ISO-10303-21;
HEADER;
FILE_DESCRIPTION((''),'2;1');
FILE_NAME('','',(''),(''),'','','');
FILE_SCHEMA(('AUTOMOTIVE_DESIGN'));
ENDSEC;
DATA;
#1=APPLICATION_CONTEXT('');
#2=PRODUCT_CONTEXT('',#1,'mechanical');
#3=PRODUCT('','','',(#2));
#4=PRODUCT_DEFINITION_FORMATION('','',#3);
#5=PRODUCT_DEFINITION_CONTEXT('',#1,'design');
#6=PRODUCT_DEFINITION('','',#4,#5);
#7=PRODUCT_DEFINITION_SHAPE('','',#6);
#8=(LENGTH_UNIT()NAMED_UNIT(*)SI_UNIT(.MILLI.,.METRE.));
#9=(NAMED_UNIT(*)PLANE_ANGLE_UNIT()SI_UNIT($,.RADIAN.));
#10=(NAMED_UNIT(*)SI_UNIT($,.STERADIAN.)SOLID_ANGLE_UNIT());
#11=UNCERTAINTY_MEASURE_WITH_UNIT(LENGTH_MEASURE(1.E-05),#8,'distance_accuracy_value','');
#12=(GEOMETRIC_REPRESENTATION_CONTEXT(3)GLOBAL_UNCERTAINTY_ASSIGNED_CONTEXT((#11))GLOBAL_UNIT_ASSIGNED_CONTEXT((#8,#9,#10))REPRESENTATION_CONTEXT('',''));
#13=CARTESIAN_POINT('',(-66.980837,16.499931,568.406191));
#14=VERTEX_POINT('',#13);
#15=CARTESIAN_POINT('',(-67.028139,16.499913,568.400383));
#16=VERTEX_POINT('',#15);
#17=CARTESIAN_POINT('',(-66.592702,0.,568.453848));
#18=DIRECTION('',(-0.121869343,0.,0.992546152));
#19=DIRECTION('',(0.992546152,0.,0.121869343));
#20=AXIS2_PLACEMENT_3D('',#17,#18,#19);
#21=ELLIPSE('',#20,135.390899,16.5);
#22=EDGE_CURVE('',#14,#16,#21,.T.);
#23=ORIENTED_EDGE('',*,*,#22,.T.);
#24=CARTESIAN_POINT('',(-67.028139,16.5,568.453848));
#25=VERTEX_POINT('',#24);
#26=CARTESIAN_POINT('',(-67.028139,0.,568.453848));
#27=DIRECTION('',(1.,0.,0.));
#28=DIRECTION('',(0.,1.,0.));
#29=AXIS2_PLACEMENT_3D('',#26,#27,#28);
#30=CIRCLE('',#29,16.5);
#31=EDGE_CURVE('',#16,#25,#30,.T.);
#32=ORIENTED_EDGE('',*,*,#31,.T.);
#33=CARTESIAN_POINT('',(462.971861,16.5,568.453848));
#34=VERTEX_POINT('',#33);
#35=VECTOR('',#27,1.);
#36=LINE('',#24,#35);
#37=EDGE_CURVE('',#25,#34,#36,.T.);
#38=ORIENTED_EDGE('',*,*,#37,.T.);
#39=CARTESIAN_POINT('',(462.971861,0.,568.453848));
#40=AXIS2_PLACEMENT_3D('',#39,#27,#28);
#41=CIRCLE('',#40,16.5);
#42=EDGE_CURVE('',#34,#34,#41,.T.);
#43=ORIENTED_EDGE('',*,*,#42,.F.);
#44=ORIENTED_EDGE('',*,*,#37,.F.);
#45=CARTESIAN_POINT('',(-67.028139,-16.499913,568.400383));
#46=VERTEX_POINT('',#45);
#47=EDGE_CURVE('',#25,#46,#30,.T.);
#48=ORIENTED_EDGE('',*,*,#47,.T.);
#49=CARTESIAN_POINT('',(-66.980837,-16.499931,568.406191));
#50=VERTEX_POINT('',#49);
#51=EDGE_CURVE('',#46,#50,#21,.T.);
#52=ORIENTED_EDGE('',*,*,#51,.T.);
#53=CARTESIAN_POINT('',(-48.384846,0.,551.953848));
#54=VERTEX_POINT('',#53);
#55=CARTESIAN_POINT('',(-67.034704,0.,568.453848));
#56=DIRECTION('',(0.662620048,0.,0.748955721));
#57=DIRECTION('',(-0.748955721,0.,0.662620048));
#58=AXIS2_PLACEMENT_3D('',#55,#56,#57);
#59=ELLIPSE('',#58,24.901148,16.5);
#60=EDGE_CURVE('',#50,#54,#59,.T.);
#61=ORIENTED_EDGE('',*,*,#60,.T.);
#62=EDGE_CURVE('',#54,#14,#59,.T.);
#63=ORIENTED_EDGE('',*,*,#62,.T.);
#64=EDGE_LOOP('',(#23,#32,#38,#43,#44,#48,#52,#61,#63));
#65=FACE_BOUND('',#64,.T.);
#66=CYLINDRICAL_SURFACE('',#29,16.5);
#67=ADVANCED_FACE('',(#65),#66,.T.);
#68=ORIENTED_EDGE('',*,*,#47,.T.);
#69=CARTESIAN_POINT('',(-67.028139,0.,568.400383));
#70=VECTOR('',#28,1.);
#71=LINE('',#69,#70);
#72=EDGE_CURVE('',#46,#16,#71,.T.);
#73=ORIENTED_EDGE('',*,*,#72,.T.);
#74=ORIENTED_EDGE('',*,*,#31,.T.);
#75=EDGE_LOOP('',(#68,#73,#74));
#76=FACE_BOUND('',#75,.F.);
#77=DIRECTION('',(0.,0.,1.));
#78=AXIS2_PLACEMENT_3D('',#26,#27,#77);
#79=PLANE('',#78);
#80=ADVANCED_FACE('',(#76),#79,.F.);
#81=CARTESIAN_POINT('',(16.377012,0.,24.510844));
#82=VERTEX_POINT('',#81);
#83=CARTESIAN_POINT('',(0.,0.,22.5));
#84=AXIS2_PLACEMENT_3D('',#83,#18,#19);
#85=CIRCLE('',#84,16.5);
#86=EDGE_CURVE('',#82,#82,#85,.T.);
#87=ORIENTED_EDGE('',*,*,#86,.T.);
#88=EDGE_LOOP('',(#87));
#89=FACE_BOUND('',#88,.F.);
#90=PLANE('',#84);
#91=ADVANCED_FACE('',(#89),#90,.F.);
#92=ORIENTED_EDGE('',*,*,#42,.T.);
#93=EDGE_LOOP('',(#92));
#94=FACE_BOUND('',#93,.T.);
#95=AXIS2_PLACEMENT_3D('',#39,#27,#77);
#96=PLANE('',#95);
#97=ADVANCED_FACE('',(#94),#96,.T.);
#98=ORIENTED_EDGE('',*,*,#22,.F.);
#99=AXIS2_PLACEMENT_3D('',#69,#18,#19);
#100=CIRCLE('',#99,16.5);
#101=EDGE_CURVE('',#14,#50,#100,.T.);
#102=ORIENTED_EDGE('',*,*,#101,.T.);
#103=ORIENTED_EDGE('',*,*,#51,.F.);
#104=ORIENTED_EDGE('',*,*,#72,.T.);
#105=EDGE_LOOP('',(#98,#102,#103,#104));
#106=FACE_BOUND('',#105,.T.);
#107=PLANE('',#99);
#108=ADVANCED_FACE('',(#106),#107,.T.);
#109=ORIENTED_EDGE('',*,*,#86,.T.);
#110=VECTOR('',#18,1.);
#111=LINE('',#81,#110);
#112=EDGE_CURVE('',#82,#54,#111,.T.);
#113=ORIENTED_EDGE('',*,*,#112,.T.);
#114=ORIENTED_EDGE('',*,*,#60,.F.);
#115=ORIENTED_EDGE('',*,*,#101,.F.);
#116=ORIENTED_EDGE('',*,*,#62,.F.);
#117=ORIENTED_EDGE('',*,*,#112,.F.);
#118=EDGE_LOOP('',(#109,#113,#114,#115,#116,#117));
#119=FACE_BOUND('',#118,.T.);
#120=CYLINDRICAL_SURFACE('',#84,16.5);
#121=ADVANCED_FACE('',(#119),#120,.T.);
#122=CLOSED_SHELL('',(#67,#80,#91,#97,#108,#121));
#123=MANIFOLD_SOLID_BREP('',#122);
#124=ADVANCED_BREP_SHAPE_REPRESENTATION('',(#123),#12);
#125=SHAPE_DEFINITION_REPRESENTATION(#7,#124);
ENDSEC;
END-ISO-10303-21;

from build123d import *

# Parameters (mm, degrees)
F3_R = 16.5
F6_R = 16.5


# Not quite as in the source:
# - the program builds the solid bodies; features that only make, move or delete a surface that nothing else refers to are left out


with BuildPart() as f4:
    # F4: sweep along a path in F0
    with BuildLine(Plane.XZ) as f4_path:
        Line((0, 22.5), (-67.0281388728, 568.4003834027))
    # F3 (on line) → F4 (sweep)
    with BuildSketch(Plane(origin=(-69.7497601983, 0, 568.0662103233), x_dir=(0.9925461516, 0, 0.1218693434), z_dir=(-0.1218693434, 0, 0.9925461516))):
        with Locations((2.7420602266, 0)):
            Circle(F3_R)
    sweep(path=f4_path.line)

    # F7: sweep along a path in F0
    with BuildLine(Plane.XZ) as f7_path:
        Line((-67.0281388728, 568.4003834027), (462.9718611272, 568.4003834027))
    # F6 (on line) → F7 (sweep)
    with BuildSketch(Plane.YZ.offset(462.9718611272)):
        with Locations((0, 568.453848362)):
            Circle(F6_R)
    sweep(path=f7_path.line)


solid = f4.part
